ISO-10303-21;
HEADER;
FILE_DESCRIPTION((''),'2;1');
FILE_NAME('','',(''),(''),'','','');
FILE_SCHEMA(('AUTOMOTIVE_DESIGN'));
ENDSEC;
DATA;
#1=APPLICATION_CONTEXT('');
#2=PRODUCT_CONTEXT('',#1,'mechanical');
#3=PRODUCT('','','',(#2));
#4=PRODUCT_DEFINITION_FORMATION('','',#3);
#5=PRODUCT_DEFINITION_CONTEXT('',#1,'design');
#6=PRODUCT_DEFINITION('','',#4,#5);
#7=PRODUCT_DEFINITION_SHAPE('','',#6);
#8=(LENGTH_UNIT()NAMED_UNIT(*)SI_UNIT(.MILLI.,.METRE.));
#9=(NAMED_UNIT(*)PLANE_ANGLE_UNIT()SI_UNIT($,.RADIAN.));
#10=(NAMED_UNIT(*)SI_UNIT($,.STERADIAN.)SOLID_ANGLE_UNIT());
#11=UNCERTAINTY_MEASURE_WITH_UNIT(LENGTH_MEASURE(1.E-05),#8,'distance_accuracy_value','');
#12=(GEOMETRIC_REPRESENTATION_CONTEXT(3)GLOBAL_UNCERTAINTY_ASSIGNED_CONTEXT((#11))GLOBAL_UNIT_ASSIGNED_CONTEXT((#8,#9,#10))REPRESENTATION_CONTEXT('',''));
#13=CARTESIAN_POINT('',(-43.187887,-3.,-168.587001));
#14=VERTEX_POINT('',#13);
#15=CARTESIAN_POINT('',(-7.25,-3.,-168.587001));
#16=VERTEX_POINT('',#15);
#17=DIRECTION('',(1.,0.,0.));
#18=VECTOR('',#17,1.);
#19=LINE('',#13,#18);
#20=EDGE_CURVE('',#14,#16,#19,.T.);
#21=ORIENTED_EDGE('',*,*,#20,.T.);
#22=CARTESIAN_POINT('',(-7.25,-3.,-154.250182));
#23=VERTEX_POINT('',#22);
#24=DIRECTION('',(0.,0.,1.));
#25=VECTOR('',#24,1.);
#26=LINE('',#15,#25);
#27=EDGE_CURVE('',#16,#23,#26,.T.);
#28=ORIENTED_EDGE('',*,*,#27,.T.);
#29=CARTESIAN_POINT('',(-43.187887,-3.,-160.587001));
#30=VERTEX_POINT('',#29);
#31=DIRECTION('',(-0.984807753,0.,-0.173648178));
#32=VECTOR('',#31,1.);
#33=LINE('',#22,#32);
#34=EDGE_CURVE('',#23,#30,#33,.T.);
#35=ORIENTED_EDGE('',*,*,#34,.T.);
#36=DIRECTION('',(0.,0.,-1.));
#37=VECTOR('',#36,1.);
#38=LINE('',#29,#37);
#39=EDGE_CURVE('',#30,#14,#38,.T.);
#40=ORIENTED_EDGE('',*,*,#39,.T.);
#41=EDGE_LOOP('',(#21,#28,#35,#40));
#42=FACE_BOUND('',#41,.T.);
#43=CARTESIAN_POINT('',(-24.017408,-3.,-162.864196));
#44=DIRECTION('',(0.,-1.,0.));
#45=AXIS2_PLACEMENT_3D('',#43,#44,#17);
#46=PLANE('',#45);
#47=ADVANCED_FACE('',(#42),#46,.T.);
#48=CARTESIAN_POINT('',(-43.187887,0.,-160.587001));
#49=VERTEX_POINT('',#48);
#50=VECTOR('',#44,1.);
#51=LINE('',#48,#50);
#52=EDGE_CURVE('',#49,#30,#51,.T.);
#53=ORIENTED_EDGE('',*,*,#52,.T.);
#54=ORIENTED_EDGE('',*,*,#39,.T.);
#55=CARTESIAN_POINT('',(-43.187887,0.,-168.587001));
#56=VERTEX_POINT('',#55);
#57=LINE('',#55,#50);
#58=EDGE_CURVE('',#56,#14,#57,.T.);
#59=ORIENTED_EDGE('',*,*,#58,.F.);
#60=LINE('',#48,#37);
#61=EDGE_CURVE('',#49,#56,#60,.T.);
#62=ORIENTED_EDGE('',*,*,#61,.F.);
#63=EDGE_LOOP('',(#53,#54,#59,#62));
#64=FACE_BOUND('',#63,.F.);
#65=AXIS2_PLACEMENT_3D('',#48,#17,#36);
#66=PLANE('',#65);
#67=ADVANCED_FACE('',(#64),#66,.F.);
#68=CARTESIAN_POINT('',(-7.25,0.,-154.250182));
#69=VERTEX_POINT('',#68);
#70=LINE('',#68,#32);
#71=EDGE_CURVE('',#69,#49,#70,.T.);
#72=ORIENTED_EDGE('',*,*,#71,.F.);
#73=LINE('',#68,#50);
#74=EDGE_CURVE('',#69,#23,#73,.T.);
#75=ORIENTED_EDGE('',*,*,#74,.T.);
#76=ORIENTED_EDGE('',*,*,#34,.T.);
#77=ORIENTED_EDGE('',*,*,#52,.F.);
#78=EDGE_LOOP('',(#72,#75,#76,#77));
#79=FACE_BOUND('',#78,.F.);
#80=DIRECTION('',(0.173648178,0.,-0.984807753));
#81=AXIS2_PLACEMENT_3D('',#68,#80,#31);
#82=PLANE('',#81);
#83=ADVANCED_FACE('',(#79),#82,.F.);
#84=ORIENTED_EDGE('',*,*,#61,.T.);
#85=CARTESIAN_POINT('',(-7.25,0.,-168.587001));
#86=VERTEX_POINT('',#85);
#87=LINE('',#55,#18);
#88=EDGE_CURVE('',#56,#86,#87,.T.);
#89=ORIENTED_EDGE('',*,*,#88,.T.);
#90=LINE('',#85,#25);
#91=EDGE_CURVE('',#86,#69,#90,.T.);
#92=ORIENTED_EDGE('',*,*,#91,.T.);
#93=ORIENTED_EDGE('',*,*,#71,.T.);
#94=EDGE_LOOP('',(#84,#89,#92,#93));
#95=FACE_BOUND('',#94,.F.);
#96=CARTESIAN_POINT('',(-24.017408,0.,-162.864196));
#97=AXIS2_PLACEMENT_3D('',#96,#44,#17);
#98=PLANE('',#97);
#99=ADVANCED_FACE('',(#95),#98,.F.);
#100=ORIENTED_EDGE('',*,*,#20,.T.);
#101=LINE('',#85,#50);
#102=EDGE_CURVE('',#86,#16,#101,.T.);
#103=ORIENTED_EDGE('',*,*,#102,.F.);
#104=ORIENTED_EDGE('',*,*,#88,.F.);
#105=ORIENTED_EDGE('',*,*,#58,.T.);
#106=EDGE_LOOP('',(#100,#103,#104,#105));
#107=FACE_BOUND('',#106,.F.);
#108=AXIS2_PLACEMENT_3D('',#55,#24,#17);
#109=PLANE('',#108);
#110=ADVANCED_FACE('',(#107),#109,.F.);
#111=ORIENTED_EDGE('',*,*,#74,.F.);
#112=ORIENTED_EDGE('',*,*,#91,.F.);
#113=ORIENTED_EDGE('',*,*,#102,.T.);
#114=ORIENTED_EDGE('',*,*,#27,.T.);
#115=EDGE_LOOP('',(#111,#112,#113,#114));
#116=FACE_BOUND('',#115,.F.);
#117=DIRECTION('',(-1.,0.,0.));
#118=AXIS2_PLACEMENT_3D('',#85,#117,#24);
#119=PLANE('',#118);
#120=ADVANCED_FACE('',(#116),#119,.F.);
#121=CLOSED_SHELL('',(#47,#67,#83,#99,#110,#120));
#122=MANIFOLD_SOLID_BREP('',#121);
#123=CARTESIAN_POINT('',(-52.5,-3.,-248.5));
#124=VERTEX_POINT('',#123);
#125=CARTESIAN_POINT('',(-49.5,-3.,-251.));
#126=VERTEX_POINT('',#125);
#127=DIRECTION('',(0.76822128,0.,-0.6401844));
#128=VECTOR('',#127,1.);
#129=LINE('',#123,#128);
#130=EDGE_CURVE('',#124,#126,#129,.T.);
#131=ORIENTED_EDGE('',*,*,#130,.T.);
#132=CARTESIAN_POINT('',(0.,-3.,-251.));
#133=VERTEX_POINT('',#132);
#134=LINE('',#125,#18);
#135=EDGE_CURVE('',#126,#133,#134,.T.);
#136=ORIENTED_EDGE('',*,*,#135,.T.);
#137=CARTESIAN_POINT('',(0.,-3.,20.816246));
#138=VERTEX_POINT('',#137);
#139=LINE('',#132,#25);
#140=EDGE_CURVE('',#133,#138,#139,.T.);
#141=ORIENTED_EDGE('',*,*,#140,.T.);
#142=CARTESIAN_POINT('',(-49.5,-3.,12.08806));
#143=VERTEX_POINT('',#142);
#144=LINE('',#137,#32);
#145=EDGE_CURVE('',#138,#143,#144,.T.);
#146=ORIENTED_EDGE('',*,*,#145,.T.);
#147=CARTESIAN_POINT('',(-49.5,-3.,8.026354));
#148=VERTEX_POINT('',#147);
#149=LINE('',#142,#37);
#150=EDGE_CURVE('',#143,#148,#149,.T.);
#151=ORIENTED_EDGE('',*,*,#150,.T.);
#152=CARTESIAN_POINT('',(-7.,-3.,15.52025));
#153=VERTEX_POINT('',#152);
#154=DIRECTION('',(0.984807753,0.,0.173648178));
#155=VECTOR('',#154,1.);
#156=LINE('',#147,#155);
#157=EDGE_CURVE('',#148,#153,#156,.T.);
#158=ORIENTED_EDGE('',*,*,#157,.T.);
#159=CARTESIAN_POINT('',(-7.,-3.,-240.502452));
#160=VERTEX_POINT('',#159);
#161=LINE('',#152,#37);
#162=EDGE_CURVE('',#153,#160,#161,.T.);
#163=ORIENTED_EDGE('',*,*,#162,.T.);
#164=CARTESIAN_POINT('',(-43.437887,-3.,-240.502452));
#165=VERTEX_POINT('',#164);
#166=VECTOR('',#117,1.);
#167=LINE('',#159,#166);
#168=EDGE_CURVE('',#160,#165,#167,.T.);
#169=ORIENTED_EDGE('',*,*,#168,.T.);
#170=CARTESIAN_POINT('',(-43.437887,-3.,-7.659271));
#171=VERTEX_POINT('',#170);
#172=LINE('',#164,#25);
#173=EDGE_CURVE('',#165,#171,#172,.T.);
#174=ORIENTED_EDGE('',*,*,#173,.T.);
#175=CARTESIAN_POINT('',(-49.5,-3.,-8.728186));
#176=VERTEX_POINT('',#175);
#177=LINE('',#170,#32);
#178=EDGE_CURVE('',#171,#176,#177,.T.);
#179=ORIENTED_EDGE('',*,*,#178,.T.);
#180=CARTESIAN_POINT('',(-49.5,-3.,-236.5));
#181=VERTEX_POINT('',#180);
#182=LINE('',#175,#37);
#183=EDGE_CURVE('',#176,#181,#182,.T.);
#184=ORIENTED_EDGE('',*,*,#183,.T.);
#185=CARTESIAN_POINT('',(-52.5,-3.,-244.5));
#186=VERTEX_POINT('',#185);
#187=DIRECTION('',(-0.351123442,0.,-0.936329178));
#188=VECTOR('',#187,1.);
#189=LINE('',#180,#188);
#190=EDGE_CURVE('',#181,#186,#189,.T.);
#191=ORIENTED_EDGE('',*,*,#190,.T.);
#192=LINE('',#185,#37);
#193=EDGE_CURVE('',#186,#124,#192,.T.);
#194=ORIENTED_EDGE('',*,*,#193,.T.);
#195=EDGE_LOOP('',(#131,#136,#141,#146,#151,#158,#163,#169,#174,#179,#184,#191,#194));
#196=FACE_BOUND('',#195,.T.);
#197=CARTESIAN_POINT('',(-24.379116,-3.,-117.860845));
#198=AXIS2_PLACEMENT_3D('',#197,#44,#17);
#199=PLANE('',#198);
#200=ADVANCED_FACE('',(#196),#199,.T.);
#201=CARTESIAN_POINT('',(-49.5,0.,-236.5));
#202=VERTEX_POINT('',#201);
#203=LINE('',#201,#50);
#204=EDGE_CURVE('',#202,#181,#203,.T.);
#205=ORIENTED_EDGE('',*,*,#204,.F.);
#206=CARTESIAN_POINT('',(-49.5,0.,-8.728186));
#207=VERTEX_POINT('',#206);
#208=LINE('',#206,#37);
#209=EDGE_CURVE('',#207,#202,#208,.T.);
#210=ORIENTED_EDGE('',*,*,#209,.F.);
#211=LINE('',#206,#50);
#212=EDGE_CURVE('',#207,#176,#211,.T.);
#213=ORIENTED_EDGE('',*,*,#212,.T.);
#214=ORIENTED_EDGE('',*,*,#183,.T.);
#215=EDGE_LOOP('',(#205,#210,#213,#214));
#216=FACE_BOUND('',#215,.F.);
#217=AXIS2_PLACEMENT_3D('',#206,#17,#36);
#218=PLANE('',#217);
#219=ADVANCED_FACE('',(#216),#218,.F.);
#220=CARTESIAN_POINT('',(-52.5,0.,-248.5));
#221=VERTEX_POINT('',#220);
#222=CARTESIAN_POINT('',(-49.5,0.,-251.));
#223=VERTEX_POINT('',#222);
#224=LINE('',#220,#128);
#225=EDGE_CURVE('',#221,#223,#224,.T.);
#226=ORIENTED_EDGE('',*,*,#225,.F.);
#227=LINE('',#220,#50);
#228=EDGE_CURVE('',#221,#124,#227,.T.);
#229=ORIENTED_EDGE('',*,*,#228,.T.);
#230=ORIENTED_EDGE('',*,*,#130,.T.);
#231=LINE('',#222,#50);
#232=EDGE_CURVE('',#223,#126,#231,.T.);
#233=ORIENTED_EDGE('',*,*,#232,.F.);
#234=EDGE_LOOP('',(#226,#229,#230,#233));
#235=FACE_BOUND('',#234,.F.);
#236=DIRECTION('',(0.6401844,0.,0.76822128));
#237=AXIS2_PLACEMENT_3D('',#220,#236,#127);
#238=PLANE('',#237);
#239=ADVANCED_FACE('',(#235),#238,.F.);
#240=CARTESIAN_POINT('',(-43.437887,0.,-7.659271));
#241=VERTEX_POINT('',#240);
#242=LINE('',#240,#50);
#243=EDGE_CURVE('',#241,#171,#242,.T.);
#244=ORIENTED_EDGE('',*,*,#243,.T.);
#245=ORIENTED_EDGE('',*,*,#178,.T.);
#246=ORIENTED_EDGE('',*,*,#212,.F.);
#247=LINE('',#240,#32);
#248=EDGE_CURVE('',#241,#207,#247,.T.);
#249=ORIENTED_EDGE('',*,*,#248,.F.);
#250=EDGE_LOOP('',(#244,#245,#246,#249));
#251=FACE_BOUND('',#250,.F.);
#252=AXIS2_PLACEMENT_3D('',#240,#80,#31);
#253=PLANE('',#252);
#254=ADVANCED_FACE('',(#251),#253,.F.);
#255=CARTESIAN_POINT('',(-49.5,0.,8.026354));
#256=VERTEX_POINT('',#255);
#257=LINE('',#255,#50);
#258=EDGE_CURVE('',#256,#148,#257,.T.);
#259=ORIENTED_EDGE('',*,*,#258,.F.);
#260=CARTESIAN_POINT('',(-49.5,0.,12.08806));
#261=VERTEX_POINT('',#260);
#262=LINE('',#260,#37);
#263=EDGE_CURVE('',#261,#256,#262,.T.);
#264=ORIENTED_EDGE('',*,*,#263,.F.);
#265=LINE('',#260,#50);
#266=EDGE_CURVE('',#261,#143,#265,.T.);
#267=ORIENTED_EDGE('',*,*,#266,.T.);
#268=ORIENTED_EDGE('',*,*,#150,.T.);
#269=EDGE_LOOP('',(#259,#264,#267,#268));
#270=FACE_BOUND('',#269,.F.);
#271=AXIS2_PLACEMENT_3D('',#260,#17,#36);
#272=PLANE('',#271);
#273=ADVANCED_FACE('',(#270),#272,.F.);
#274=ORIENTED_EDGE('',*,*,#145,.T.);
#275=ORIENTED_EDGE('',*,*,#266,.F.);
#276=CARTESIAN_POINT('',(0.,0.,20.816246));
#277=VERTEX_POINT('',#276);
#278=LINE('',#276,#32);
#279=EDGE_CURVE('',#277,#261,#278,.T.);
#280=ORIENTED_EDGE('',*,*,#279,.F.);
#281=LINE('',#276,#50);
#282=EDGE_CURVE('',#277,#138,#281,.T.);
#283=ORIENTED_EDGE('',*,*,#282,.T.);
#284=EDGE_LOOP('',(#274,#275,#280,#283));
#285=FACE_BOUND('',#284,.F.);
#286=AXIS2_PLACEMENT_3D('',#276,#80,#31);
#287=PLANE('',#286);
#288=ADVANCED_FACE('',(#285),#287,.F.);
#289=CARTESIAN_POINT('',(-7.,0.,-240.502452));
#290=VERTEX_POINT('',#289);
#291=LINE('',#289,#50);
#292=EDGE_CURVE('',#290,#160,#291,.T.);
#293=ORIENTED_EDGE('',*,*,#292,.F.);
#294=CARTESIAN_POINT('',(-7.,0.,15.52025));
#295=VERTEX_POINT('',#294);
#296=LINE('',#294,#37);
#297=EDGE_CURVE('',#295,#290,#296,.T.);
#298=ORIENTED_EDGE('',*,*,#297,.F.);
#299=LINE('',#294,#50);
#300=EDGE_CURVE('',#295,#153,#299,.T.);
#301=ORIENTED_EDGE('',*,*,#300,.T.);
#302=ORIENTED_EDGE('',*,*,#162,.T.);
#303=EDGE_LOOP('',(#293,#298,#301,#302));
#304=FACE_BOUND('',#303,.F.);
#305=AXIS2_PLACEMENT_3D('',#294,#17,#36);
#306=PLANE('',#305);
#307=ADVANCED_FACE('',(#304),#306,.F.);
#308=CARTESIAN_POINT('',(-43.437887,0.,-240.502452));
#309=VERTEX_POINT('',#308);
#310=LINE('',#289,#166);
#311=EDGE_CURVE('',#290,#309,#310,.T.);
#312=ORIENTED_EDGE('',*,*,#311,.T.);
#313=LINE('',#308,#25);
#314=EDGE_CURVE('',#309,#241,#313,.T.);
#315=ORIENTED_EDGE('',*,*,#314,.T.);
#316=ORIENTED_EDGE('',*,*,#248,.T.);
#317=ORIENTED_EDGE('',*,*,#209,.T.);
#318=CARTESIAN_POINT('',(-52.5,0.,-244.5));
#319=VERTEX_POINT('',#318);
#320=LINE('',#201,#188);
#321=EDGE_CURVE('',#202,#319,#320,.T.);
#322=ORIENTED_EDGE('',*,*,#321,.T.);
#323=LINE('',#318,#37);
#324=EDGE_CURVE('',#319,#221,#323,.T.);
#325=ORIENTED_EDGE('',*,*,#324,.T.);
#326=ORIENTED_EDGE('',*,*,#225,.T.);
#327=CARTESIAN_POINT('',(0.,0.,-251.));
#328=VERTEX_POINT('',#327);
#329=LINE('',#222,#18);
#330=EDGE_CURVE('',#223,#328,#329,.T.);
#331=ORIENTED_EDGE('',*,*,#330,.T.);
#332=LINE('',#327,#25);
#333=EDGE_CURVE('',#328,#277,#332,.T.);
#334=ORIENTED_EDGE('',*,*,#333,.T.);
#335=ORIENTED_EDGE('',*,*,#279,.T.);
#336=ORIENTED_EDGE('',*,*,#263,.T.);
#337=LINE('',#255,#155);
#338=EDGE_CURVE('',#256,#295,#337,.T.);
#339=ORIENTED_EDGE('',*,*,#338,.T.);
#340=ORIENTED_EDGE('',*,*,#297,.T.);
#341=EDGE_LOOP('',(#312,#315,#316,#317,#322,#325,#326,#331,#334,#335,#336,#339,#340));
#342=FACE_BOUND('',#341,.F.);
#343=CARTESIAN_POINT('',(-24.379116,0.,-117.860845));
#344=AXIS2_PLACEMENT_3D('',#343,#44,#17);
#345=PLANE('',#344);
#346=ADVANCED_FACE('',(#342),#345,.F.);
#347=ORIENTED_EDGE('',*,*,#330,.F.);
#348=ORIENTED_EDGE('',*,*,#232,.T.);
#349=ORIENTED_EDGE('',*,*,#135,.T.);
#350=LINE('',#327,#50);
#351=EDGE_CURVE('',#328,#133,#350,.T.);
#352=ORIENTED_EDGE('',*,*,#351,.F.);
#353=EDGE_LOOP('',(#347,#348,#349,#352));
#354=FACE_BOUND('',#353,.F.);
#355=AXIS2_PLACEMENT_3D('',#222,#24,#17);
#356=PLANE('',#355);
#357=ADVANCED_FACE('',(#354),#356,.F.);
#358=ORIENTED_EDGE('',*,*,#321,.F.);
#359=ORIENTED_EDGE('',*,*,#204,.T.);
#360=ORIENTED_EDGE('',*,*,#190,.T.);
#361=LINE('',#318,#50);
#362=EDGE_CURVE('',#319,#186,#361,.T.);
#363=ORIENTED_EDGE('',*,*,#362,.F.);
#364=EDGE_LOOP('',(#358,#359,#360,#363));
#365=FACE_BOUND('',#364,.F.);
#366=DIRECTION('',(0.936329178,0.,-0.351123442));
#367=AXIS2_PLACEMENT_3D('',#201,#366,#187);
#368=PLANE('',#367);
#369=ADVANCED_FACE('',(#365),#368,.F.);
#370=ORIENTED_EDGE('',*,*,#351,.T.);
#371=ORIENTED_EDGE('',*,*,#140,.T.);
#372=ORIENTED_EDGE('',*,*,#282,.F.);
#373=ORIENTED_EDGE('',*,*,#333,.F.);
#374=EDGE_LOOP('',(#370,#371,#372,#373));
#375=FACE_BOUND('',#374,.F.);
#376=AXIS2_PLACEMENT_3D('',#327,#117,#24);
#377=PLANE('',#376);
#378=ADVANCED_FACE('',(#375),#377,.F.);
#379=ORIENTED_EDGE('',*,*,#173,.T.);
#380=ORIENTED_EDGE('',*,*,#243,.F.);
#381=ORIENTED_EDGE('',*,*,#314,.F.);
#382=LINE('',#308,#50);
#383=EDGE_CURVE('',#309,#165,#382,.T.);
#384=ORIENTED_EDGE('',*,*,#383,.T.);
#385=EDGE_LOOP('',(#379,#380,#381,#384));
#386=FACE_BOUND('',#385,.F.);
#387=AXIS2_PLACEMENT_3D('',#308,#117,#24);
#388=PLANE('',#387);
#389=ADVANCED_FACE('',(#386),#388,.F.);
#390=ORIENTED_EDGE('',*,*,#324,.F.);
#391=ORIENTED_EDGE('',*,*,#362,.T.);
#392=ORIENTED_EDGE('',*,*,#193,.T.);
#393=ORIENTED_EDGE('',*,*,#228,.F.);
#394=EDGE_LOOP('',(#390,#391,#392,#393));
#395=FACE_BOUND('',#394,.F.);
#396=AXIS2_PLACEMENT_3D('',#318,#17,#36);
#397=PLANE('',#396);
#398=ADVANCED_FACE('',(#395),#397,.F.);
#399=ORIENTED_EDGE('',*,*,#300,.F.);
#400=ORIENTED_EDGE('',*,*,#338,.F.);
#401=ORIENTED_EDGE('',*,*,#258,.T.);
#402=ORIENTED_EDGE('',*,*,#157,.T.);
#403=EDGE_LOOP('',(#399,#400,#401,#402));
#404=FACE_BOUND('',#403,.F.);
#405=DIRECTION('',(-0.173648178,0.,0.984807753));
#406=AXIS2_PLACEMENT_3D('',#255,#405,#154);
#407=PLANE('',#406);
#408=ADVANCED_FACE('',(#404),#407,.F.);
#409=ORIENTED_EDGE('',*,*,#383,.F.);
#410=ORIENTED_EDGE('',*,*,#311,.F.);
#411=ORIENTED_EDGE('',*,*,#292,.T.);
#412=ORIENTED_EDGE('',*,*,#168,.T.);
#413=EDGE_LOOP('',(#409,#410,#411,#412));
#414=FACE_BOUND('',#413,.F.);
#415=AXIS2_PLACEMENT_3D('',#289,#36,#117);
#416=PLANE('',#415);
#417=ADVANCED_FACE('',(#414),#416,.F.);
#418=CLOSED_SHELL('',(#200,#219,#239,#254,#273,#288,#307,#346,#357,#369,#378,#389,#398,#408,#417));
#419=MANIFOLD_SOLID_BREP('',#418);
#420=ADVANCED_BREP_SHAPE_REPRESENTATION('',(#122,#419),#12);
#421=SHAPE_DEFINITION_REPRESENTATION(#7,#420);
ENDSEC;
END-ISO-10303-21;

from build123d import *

# Parameters (mm, degrees)
F1_DEPTH = 3
F2_DEPTH = 3


# Not quite as in the source:
# - a feature names something its author has since deleted; it is built from what else it names


with BuildPart() as f1:
    # F0 (on Front) → F1 (new body)
    with BuildSketch(Plane.XZ):
        Polygon((-43.1878868615, -160.5870006293), (-43.1878868615, -168.5870006293), (-7.25, -168.5870006293), (-7.25, -154.250181546), align=None)
    extrude(amount=F1_DEPTH)


with BuildPart() as f2:
    # F0 (on Front) → F2 (new body)
    with BuildSketch(Plane.XZ):
        Polygon((-49.5, -251), (0, -251), (0, 0), (0, 20.8162455437), (-49.5, 12.0880599986), (-49.5, 8.026353551), (-7, 15.5202502312), (-7, -1.234288865), (-7, -240.5024516791), (-43.4378868615, -240.5024516791), (-43.4378868615, -7.6592714386), (-49.5, -8.7281855451), (-49.5, -236.5), (-52.5, -244.5), (-52.5, -248.5), align=None)
    extrude(amount=F2_DEPTH)


solid = Compound([f1.part, f2.part])
